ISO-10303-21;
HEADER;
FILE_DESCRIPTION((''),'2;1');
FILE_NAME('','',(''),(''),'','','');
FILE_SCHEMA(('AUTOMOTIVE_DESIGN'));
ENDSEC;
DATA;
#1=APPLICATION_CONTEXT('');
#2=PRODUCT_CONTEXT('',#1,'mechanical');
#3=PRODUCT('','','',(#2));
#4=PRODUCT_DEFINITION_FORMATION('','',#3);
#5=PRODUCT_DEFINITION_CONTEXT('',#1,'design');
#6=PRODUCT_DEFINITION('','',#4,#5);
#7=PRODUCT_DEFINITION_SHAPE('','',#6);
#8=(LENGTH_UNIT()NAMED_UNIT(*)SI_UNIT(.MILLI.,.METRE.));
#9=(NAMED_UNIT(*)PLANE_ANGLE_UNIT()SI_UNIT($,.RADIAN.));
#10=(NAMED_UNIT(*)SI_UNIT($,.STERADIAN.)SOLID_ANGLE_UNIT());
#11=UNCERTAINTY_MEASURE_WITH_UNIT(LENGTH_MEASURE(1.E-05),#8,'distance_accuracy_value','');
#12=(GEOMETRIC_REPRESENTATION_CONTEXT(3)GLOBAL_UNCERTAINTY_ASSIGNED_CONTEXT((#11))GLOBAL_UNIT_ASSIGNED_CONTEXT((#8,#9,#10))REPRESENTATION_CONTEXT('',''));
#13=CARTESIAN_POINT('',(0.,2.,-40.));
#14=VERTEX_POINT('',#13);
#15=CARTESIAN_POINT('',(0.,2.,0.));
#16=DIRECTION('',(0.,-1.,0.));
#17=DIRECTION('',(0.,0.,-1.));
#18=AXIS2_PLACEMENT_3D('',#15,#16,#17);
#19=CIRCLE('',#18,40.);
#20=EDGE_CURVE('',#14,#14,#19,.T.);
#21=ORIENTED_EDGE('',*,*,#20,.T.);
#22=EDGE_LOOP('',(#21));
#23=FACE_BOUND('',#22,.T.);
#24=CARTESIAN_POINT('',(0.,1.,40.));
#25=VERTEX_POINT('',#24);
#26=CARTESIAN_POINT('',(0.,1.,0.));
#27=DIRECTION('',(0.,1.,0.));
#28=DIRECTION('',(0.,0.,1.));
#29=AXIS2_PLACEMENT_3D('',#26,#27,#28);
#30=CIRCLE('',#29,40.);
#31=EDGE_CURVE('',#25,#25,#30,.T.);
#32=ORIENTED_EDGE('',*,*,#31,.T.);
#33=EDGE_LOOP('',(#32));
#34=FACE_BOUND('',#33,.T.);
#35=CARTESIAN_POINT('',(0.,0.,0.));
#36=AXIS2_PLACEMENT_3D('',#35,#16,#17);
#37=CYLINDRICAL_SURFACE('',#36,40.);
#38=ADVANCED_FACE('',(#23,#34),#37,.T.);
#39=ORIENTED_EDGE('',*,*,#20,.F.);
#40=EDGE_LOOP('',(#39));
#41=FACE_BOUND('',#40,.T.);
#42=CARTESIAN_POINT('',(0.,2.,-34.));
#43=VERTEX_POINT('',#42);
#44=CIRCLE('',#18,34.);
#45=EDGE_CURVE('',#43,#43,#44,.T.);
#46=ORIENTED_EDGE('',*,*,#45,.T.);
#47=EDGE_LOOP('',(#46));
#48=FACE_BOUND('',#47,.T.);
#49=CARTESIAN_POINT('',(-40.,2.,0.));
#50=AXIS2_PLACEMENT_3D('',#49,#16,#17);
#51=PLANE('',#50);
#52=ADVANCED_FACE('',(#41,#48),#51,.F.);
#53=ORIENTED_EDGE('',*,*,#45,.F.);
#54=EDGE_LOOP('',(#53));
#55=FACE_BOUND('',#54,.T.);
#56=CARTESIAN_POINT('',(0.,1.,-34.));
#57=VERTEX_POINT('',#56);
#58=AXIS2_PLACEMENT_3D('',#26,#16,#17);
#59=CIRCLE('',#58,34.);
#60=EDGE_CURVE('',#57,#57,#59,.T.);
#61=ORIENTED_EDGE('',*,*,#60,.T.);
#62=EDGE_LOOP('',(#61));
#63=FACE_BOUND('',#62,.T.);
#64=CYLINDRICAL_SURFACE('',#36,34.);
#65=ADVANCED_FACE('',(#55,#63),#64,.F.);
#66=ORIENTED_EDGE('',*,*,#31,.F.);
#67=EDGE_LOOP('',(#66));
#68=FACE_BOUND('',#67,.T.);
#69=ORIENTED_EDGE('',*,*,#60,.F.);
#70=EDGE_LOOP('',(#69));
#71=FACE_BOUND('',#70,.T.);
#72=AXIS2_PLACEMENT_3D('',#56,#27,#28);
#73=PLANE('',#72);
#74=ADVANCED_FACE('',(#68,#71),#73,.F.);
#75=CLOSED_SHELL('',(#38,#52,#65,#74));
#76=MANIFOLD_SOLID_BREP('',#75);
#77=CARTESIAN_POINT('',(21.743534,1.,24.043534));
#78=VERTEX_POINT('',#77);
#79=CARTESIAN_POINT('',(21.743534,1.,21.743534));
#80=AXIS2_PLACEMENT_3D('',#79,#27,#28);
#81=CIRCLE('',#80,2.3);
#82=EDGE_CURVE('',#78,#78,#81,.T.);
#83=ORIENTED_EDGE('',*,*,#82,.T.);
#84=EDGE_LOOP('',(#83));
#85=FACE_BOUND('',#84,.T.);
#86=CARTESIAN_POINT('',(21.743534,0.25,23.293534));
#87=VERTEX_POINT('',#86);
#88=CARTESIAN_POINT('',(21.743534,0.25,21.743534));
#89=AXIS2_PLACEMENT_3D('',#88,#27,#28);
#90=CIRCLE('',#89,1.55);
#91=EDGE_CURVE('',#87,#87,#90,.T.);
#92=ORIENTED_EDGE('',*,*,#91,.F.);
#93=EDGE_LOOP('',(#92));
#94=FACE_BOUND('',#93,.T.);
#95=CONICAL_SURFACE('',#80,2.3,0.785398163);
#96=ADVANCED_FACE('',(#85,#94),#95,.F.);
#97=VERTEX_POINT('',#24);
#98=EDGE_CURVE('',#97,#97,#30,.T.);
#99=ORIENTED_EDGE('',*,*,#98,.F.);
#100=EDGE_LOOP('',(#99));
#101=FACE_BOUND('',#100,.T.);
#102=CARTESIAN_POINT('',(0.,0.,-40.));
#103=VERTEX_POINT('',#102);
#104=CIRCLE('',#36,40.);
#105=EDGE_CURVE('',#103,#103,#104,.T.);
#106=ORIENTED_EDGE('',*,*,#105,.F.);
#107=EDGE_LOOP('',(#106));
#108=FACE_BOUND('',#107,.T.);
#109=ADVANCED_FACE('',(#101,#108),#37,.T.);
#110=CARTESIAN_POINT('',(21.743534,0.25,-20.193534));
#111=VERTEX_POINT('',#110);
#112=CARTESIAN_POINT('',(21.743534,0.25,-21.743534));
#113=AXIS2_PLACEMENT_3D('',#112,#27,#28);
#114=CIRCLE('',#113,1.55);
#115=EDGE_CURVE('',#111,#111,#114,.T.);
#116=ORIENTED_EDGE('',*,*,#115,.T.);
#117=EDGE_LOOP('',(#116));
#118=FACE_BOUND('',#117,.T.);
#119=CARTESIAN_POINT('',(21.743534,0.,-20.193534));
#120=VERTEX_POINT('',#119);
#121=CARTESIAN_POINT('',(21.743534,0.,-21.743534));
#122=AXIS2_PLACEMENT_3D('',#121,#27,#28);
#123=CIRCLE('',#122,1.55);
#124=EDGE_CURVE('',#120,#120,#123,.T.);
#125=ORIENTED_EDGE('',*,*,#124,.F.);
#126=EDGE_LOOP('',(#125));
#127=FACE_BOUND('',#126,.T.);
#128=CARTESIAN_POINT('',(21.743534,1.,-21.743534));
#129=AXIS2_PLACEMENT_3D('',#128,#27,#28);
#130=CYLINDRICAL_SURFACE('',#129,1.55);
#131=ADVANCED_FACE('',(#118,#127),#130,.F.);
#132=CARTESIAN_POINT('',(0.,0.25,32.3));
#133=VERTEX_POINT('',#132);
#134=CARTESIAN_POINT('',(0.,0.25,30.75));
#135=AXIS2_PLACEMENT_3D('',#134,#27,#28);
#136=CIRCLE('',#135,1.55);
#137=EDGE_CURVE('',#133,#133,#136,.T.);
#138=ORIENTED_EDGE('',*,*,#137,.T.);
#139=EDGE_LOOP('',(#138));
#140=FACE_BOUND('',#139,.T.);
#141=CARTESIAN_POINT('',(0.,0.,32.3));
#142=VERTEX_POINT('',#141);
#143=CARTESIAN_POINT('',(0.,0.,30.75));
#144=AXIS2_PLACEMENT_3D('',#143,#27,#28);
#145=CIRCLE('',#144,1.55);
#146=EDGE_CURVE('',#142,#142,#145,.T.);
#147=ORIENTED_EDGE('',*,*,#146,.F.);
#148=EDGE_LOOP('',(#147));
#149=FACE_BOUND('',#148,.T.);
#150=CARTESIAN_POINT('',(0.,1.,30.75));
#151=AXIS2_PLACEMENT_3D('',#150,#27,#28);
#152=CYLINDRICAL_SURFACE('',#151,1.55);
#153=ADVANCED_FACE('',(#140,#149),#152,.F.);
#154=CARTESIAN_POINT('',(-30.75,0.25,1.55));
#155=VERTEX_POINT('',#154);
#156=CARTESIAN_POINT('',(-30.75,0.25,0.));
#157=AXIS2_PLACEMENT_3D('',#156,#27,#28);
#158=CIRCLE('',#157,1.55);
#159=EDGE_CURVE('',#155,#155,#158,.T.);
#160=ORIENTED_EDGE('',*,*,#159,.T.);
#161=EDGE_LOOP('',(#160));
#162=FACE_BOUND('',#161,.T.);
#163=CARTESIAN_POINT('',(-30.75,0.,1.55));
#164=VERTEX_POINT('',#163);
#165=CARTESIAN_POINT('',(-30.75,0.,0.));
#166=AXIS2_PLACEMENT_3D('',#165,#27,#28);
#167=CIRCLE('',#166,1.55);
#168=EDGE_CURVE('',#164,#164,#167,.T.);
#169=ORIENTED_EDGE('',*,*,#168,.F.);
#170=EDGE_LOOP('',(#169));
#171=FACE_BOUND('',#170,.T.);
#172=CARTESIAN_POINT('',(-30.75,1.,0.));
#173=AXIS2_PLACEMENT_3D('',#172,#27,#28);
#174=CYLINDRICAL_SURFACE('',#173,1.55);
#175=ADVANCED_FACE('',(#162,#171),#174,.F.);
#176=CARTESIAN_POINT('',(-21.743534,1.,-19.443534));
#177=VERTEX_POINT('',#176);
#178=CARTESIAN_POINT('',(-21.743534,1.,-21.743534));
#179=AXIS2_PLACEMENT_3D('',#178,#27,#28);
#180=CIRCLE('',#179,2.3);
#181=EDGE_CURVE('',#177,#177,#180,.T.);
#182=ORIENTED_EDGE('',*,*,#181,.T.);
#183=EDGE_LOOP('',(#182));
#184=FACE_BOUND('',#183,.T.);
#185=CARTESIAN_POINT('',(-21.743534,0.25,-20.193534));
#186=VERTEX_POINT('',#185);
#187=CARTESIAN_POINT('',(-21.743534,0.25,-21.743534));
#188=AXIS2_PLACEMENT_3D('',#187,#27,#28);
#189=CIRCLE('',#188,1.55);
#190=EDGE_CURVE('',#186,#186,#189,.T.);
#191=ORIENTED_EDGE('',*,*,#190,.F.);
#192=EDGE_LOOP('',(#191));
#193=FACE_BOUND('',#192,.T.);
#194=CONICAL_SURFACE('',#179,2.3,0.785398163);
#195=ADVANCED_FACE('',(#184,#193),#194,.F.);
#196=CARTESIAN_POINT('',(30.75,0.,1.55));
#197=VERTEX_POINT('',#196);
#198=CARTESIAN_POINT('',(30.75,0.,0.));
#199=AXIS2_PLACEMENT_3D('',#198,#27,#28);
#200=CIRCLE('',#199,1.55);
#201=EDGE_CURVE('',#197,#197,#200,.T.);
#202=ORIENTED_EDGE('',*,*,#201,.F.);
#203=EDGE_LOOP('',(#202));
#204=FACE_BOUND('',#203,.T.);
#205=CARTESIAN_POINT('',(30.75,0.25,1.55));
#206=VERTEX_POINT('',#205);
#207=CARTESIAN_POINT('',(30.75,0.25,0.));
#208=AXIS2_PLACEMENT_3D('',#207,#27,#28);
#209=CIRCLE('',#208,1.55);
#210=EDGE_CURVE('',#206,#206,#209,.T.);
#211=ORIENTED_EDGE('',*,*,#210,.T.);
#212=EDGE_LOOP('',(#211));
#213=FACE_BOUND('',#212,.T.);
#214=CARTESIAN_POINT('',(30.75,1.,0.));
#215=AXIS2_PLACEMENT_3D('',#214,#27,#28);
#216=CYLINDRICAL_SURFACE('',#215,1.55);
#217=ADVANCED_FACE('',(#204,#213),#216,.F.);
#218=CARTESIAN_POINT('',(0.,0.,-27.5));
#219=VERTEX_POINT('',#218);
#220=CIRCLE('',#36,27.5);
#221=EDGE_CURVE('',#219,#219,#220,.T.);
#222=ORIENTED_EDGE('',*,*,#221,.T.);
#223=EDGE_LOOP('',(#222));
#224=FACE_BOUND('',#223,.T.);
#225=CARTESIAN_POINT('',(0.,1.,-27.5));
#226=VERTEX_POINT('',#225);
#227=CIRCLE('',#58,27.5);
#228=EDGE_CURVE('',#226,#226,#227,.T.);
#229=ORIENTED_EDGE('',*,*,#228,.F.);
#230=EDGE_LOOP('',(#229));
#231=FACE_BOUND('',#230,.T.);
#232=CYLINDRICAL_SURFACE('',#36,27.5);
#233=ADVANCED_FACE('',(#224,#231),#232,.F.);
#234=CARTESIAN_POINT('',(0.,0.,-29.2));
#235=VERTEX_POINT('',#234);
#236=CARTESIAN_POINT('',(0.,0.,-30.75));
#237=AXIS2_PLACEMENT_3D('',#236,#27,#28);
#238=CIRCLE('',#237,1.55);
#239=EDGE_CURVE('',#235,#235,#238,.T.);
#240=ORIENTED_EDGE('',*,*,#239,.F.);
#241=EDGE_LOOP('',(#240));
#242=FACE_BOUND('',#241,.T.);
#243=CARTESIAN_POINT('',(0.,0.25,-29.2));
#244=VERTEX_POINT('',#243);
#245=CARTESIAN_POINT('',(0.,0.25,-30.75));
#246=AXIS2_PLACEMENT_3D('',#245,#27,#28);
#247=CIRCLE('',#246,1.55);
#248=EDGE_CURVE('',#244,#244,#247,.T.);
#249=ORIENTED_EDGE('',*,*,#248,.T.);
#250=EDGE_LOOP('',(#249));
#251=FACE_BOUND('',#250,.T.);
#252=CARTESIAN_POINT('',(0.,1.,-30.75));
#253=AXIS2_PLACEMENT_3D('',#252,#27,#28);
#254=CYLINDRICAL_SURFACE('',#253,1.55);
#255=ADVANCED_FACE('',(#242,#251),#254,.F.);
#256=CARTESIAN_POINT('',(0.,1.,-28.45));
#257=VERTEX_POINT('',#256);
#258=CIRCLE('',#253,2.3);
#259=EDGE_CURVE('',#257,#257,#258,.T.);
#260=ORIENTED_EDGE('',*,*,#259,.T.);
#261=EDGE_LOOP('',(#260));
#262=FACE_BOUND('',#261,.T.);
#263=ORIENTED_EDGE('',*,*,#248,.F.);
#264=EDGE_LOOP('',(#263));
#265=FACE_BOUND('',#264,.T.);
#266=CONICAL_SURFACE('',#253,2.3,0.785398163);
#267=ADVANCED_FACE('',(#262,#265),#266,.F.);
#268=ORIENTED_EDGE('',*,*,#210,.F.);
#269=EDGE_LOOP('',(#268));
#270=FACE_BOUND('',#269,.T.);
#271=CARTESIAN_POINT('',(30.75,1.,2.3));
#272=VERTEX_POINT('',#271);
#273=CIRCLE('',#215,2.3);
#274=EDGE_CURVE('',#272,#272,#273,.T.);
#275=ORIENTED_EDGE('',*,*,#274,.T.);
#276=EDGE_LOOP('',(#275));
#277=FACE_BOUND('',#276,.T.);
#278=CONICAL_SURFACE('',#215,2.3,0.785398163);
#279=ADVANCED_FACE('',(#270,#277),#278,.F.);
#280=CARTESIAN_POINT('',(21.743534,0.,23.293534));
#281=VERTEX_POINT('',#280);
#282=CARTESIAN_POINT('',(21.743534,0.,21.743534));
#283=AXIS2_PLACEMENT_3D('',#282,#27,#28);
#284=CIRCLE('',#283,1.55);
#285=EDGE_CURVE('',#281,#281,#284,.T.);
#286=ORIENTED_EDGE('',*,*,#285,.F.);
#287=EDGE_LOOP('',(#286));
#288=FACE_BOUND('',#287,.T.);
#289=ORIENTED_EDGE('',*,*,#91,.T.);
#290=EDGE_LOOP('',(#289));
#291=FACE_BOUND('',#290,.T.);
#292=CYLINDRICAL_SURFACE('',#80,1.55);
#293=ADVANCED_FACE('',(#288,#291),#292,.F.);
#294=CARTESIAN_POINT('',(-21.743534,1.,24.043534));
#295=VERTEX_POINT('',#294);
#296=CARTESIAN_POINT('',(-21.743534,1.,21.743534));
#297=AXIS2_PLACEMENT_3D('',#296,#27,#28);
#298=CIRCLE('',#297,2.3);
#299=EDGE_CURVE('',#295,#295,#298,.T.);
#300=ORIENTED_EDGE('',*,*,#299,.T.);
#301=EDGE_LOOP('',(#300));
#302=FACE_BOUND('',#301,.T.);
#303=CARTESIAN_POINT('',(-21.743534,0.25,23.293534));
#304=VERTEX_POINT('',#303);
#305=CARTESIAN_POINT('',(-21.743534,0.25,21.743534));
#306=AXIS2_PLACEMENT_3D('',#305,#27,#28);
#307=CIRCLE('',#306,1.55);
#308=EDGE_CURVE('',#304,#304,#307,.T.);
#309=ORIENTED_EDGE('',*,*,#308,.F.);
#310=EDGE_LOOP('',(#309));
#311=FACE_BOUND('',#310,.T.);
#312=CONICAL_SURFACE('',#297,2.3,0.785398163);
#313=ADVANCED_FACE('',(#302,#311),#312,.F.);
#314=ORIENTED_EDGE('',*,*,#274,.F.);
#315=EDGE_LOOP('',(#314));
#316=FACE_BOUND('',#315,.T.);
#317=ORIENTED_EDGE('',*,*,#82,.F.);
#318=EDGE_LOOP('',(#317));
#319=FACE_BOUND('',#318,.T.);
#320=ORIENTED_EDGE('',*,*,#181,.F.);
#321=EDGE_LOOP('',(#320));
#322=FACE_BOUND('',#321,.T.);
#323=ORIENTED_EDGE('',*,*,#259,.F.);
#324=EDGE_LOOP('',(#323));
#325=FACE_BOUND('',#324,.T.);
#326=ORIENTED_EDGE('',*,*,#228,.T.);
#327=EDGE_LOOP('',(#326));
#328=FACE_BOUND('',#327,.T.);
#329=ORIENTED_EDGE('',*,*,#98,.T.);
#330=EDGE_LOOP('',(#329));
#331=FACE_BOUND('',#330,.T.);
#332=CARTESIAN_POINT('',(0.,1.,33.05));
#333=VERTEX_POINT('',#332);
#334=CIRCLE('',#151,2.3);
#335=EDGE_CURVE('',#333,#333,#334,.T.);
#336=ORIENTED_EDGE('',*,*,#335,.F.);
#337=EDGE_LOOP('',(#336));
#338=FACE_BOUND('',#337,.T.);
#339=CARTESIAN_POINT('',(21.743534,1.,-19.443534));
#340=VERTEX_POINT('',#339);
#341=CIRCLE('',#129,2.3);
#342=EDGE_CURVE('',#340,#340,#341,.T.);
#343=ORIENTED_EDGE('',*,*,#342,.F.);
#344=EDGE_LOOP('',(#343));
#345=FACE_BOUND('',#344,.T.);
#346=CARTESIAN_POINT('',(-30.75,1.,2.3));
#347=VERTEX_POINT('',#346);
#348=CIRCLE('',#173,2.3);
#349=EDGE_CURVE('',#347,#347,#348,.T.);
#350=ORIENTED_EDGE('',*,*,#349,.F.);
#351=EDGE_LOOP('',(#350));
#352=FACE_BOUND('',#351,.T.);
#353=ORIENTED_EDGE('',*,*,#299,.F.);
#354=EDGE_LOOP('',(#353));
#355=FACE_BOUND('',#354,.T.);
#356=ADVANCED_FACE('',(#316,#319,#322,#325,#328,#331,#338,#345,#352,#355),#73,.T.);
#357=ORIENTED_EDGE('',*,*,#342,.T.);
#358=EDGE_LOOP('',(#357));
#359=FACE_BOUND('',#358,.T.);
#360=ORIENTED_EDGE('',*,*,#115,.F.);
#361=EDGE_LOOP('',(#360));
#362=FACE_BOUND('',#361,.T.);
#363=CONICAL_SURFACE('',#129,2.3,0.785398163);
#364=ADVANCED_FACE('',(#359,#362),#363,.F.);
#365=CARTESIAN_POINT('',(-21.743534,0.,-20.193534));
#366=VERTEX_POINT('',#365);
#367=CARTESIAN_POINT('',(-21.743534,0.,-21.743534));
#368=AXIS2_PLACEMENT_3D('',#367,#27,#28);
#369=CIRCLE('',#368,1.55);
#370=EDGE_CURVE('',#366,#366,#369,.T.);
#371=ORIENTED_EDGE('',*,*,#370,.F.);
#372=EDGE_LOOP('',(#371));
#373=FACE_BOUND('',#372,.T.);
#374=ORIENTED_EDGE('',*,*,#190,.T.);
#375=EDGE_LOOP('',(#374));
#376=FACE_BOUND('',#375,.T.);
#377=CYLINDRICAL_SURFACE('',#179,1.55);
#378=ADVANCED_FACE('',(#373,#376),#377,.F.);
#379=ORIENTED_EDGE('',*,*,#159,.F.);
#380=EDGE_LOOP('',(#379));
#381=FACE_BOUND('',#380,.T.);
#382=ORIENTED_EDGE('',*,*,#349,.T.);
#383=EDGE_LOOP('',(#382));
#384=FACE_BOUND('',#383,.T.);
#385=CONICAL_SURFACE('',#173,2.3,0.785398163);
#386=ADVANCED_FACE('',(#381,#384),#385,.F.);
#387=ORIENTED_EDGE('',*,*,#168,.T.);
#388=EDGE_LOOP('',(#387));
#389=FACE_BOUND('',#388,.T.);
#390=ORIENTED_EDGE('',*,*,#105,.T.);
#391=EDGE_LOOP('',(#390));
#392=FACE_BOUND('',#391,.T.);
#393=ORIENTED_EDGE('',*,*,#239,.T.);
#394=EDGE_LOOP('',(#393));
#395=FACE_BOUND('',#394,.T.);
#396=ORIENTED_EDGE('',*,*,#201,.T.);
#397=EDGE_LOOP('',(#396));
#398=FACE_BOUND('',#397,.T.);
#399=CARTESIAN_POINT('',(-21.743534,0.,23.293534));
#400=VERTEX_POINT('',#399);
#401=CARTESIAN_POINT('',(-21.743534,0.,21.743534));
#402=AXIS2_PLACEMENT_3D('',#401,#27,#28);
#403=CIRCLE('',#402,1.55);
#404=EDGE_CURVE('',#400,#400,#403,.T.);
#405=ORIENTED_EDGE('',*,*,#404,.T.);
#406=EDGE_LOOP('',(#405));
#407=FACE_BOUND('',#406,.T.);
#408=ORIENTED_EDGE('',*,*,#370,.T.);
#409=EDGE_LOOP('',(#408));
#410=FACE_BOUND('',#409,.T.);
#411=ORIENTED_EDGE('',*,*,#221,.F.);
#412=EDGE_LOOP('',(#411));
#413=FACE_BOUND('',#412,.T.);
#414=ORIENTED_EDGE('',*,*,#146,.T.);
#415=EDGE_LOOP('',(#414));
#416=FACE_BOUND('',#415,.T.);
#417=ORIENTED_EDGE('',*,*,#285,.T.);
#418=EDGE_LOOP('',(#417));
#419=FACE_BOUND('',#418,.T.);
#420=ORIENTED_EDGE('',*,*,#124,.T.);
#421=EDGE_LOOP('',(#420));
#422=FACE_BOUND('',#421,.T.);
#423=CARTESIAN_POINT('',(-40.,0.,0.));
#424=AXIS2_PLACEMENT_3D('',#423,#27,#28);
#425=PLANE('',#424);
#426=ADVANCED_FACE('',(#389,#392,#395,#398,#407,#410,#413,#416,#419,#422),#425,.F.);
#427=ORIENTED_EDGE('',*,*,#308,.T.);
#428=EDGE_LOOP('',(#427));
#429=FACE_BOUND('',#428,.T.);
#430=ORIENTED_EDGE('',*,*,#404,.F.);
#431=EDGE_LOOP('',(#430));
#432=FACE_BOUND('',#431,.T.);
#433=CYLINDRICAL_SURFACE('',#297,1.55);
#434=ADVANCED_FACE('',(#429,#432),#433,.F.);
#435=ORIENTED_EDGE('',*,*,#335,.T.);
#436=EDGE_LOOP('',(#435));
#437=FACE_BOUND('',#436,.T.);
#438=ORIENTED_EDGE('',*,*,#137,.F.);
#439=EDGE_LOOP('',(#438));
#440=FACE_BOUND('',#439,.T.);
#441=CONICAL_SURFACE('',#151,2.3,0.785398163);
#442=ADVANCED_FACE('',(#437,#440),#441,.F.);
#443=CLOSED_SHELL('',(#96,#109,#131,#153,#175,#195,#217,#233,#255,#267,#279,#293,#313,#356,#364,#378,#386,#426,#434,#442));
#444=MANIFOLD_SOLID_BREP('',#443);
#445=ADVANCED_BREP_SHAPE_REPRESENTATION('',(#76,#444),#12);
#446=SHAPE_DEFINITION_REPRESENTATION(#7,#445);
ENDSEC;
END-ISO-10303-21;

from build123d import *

# Parameters (mm, degrees)
CIRPATTERN1_COUNT = 8


with BuildPart() as part:
    # Sketch1 → Revolve1 (revolve)
    with BuildSketch(Plane.XY):
        Polygon((-40, 0), (-27.5, 0), (-27.5, 1), (-34, 1), (-34, 2), (-40, 2), align=None)
    revolve(axis=Axis((0, 0, 0), (0, 1, 0)))

    # Sketch2 → CSK for M2.5 Countersunk Flat Head Screw1 (revolve, cut)
    with BuildSketch(Plane(origin=(0, 1, -30.75), x_dir=(0, 0, 1), z_dir=(1, 0, 0))):
        Polygon((0, 0), (0, 1), (1.55, 1), (1.55, 0.75), (2.3, 0), align=None)
    csk_for_m2_5_countersunk_flat_head_screw = revolve(axis=Axis((0, 7.35, -30.75), (0, -1, 0)), mode=Mode.SUBTRACT)

    # CirPattern1: CSK for M2.5 Countersunk Flat Head Screw1 ×8 about axis
    cirpattern1_axis = Axis((0, 1, 0), (0, -1, 0))
    for i in range(1, CIRPATTERN1_COUNT):
        add(csk_for_m2_5_countersunk_flat_head_screw.rotate(cirpattern1_axis, i * 360 / CIRPATTERN1_COUNT), mode=Mode.SUBTRACT)


with BuildPart() as body_2:
    # Split1: the piece on the far side of the plane
    add(part.part)
    split(bisect_by=Plane(origin=(-34, 1, 0), x_dir=(0, 0, -1), z_dir=(0, -1, 0)), keep=Keep.BOTTOM)


with BuildPart() as part_1:
    add(part.part)

    # Split1
    split(bisect_by=Plane(origin=(-34, 1, 0), x_dir=(0, 0, -1), z_dir=(0, -1, 0)), keep=Keep.TOP)


solid = Compound([body_2.part, part_1.part])
